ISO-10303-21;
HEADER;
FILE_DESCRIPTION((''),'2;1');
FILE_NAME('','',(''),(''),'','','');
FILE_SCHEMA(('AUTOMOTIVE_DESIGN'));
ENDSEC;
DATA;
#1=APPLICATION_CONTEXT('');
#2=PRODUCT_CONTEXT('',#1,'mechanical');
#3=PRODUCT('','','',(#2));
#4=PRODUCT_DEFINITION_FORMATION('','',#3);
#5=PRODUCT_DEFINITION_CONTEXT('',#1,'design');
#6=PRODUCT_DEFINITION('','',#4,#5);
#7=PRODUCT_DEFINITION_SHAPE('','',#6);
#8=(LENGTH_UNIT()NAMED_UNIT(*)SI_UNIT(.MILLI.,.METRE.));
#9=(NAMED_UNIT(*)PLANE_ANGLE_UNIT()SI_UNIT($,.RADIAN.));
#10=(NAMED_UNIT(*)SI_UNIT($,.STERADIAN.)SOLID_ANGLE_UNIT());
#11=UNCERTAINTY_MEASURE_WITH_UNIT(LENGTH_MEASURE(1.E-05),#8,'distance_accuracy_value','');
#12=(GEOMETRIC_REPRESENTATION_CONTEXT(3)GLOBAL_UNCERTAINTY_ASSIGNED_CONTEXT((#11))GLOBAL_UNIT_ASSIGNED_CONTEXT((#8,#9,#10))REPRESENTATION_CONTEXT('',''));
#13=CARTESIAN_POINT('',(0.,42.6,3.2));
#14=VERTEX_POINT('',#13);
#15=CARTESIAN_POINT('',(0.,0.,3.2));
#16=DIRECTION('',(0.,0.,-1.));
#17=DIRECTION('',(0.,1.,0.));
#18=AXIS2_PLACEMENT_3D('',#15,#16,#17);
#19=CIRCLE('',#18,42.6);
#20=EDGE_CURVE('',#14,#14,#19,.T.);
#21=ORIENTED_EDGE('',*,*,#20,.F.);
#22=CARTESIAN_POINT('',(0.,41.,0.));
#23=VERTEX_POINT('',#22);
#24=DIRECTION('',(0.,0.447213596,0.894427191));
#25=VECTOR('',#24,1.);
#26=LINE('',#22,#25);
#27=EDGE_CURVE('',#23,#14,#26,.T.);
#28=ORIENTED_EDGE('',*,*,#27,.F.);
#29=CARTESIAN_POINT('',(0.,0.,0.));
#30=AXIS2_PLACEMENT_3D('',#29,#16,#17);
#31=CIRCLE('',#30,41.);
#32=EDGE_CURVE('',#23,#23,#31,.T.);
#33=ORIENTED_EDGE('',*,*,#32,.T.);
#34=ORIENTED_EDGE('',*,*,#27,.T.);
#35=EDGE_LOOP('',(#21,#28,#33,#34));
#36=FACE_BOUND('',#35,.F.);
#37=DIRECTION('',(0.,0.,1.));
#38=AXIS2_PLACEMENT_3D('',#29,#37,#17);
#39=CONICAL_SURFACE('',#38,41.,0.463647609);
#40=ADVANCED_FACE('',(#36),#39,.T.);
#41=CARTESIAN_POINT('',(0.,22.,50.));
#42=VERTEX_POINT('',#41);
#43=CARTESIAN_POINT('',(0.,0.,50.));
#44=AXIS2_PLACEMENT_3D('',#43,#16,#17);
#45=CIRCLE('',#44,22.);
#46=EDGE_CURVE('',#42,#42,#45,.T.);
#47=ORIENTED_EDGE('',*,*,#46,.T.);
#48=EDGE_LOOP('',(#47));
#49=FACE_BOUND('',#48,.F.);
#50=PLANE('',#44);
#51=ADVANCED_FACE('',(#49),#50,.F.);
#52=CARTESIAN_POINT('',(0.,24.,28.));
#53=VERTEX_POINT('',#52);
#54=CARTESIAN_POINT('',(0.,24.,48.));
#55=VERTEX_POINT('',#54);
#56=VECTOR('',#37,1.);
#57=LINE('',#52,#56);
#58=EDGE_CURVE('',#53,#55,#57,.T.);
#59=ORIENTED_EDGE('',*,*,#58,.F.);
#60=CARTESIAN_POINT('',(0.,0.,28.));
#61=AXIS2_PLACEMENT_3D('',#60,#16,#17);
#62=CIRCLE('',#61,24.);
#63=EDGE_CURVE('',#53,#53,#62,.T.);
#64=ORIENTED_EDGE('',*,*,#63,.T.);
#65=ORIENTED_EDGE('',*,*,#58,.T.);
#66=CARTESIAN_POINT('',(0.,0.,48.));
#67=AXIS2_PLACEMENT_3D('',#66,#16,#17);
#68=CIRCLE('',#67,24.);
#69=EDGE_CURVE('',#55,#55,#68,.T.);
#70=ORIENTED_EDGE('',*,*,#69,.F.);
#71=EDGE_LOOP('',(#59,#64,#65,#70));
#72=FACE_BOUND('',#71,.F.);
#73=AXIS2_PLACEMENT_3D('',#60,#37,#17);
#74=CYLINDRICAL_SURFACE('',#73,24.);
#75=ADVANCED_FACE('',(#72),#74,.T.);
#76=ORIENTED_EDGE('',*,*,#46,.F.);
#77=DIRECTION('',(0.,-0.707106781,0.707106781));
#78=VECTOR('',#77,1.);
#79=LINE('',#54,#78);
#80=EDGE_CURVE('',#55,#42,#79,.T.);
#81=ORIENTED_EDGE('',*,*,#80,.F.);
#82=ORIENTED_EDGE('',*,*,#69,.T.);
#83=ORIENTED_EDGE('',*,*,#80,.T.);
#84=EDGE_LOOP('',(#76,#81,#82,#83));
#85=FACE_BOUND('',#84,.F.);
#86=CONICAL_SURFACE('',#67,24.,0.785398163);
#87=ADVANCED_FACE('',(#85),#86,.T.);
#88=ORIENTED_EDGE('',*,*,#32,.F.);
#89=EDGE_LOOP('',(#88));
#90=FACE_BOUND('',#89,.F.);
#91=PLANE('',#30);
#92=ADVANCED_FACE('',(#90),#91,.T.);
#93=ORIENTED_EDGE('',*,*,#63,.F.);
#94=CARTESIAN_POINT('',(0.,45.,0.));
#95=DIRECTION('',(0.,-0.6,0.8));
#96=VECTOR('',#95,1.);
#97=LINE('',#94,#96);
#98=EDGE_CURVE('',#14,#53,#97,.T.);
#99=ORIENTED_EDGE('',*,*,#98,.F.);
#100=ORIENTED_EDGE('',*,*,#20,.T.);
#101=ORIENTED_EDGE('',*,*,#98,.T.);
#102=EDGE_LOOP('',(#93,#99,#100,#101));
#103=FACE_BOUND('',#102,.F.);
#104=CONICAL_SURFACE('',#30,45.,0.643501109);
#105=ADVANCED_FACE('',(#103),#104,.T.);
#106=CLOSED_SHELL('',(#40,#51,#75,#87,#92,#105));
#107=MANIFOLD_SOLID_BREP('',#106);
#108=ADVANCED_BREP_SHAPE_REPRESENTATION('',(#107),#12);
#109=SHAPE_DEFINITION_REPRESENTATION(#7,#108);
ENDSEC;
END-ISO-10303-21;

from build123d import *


# Not quite as in the source:
# - a fillet or chamfer that OpenCascade refuses, or shapes differently, is made with other operations: its cross-section is extruded or revolved along the edge and cut away or added


with BuildPart() as f1:
    # F0 (on Right) → F1 (revolve)
    with BuildSketch(Plane.YZ):
        Polygon((0, 50), (0, 0), (45, 0), (24, 28), (24, 50), align=None)
    revolve(axis=Axis((0, 0, 9.18032974), (0, 0, -1)))

    # F2: chamfer of 2 on 2 edges, made by hand

    # F2_s1 → F2_t2 (revolve, cut)
    with BuildSketch(Plane.YZ):
        Polygon((24, 48), (22, 50), (24, 50), align=None)
    revolve(axis=Axis((0, 0, 50), (0, 0, -1)), mode=Mode.SUBTRACT)

    # F2_s3 → F2_t4 (revolve, cut)
    with BuildSketch(Plane.YZ):
        Polygon((41, 0), (42.6, 3.2), (45, 0), align=None)
    revolve(axis=Axis((0, 0, 0), (0, 0, -1)), mode=Mode.SUBTRACT)


solid = f1.part
